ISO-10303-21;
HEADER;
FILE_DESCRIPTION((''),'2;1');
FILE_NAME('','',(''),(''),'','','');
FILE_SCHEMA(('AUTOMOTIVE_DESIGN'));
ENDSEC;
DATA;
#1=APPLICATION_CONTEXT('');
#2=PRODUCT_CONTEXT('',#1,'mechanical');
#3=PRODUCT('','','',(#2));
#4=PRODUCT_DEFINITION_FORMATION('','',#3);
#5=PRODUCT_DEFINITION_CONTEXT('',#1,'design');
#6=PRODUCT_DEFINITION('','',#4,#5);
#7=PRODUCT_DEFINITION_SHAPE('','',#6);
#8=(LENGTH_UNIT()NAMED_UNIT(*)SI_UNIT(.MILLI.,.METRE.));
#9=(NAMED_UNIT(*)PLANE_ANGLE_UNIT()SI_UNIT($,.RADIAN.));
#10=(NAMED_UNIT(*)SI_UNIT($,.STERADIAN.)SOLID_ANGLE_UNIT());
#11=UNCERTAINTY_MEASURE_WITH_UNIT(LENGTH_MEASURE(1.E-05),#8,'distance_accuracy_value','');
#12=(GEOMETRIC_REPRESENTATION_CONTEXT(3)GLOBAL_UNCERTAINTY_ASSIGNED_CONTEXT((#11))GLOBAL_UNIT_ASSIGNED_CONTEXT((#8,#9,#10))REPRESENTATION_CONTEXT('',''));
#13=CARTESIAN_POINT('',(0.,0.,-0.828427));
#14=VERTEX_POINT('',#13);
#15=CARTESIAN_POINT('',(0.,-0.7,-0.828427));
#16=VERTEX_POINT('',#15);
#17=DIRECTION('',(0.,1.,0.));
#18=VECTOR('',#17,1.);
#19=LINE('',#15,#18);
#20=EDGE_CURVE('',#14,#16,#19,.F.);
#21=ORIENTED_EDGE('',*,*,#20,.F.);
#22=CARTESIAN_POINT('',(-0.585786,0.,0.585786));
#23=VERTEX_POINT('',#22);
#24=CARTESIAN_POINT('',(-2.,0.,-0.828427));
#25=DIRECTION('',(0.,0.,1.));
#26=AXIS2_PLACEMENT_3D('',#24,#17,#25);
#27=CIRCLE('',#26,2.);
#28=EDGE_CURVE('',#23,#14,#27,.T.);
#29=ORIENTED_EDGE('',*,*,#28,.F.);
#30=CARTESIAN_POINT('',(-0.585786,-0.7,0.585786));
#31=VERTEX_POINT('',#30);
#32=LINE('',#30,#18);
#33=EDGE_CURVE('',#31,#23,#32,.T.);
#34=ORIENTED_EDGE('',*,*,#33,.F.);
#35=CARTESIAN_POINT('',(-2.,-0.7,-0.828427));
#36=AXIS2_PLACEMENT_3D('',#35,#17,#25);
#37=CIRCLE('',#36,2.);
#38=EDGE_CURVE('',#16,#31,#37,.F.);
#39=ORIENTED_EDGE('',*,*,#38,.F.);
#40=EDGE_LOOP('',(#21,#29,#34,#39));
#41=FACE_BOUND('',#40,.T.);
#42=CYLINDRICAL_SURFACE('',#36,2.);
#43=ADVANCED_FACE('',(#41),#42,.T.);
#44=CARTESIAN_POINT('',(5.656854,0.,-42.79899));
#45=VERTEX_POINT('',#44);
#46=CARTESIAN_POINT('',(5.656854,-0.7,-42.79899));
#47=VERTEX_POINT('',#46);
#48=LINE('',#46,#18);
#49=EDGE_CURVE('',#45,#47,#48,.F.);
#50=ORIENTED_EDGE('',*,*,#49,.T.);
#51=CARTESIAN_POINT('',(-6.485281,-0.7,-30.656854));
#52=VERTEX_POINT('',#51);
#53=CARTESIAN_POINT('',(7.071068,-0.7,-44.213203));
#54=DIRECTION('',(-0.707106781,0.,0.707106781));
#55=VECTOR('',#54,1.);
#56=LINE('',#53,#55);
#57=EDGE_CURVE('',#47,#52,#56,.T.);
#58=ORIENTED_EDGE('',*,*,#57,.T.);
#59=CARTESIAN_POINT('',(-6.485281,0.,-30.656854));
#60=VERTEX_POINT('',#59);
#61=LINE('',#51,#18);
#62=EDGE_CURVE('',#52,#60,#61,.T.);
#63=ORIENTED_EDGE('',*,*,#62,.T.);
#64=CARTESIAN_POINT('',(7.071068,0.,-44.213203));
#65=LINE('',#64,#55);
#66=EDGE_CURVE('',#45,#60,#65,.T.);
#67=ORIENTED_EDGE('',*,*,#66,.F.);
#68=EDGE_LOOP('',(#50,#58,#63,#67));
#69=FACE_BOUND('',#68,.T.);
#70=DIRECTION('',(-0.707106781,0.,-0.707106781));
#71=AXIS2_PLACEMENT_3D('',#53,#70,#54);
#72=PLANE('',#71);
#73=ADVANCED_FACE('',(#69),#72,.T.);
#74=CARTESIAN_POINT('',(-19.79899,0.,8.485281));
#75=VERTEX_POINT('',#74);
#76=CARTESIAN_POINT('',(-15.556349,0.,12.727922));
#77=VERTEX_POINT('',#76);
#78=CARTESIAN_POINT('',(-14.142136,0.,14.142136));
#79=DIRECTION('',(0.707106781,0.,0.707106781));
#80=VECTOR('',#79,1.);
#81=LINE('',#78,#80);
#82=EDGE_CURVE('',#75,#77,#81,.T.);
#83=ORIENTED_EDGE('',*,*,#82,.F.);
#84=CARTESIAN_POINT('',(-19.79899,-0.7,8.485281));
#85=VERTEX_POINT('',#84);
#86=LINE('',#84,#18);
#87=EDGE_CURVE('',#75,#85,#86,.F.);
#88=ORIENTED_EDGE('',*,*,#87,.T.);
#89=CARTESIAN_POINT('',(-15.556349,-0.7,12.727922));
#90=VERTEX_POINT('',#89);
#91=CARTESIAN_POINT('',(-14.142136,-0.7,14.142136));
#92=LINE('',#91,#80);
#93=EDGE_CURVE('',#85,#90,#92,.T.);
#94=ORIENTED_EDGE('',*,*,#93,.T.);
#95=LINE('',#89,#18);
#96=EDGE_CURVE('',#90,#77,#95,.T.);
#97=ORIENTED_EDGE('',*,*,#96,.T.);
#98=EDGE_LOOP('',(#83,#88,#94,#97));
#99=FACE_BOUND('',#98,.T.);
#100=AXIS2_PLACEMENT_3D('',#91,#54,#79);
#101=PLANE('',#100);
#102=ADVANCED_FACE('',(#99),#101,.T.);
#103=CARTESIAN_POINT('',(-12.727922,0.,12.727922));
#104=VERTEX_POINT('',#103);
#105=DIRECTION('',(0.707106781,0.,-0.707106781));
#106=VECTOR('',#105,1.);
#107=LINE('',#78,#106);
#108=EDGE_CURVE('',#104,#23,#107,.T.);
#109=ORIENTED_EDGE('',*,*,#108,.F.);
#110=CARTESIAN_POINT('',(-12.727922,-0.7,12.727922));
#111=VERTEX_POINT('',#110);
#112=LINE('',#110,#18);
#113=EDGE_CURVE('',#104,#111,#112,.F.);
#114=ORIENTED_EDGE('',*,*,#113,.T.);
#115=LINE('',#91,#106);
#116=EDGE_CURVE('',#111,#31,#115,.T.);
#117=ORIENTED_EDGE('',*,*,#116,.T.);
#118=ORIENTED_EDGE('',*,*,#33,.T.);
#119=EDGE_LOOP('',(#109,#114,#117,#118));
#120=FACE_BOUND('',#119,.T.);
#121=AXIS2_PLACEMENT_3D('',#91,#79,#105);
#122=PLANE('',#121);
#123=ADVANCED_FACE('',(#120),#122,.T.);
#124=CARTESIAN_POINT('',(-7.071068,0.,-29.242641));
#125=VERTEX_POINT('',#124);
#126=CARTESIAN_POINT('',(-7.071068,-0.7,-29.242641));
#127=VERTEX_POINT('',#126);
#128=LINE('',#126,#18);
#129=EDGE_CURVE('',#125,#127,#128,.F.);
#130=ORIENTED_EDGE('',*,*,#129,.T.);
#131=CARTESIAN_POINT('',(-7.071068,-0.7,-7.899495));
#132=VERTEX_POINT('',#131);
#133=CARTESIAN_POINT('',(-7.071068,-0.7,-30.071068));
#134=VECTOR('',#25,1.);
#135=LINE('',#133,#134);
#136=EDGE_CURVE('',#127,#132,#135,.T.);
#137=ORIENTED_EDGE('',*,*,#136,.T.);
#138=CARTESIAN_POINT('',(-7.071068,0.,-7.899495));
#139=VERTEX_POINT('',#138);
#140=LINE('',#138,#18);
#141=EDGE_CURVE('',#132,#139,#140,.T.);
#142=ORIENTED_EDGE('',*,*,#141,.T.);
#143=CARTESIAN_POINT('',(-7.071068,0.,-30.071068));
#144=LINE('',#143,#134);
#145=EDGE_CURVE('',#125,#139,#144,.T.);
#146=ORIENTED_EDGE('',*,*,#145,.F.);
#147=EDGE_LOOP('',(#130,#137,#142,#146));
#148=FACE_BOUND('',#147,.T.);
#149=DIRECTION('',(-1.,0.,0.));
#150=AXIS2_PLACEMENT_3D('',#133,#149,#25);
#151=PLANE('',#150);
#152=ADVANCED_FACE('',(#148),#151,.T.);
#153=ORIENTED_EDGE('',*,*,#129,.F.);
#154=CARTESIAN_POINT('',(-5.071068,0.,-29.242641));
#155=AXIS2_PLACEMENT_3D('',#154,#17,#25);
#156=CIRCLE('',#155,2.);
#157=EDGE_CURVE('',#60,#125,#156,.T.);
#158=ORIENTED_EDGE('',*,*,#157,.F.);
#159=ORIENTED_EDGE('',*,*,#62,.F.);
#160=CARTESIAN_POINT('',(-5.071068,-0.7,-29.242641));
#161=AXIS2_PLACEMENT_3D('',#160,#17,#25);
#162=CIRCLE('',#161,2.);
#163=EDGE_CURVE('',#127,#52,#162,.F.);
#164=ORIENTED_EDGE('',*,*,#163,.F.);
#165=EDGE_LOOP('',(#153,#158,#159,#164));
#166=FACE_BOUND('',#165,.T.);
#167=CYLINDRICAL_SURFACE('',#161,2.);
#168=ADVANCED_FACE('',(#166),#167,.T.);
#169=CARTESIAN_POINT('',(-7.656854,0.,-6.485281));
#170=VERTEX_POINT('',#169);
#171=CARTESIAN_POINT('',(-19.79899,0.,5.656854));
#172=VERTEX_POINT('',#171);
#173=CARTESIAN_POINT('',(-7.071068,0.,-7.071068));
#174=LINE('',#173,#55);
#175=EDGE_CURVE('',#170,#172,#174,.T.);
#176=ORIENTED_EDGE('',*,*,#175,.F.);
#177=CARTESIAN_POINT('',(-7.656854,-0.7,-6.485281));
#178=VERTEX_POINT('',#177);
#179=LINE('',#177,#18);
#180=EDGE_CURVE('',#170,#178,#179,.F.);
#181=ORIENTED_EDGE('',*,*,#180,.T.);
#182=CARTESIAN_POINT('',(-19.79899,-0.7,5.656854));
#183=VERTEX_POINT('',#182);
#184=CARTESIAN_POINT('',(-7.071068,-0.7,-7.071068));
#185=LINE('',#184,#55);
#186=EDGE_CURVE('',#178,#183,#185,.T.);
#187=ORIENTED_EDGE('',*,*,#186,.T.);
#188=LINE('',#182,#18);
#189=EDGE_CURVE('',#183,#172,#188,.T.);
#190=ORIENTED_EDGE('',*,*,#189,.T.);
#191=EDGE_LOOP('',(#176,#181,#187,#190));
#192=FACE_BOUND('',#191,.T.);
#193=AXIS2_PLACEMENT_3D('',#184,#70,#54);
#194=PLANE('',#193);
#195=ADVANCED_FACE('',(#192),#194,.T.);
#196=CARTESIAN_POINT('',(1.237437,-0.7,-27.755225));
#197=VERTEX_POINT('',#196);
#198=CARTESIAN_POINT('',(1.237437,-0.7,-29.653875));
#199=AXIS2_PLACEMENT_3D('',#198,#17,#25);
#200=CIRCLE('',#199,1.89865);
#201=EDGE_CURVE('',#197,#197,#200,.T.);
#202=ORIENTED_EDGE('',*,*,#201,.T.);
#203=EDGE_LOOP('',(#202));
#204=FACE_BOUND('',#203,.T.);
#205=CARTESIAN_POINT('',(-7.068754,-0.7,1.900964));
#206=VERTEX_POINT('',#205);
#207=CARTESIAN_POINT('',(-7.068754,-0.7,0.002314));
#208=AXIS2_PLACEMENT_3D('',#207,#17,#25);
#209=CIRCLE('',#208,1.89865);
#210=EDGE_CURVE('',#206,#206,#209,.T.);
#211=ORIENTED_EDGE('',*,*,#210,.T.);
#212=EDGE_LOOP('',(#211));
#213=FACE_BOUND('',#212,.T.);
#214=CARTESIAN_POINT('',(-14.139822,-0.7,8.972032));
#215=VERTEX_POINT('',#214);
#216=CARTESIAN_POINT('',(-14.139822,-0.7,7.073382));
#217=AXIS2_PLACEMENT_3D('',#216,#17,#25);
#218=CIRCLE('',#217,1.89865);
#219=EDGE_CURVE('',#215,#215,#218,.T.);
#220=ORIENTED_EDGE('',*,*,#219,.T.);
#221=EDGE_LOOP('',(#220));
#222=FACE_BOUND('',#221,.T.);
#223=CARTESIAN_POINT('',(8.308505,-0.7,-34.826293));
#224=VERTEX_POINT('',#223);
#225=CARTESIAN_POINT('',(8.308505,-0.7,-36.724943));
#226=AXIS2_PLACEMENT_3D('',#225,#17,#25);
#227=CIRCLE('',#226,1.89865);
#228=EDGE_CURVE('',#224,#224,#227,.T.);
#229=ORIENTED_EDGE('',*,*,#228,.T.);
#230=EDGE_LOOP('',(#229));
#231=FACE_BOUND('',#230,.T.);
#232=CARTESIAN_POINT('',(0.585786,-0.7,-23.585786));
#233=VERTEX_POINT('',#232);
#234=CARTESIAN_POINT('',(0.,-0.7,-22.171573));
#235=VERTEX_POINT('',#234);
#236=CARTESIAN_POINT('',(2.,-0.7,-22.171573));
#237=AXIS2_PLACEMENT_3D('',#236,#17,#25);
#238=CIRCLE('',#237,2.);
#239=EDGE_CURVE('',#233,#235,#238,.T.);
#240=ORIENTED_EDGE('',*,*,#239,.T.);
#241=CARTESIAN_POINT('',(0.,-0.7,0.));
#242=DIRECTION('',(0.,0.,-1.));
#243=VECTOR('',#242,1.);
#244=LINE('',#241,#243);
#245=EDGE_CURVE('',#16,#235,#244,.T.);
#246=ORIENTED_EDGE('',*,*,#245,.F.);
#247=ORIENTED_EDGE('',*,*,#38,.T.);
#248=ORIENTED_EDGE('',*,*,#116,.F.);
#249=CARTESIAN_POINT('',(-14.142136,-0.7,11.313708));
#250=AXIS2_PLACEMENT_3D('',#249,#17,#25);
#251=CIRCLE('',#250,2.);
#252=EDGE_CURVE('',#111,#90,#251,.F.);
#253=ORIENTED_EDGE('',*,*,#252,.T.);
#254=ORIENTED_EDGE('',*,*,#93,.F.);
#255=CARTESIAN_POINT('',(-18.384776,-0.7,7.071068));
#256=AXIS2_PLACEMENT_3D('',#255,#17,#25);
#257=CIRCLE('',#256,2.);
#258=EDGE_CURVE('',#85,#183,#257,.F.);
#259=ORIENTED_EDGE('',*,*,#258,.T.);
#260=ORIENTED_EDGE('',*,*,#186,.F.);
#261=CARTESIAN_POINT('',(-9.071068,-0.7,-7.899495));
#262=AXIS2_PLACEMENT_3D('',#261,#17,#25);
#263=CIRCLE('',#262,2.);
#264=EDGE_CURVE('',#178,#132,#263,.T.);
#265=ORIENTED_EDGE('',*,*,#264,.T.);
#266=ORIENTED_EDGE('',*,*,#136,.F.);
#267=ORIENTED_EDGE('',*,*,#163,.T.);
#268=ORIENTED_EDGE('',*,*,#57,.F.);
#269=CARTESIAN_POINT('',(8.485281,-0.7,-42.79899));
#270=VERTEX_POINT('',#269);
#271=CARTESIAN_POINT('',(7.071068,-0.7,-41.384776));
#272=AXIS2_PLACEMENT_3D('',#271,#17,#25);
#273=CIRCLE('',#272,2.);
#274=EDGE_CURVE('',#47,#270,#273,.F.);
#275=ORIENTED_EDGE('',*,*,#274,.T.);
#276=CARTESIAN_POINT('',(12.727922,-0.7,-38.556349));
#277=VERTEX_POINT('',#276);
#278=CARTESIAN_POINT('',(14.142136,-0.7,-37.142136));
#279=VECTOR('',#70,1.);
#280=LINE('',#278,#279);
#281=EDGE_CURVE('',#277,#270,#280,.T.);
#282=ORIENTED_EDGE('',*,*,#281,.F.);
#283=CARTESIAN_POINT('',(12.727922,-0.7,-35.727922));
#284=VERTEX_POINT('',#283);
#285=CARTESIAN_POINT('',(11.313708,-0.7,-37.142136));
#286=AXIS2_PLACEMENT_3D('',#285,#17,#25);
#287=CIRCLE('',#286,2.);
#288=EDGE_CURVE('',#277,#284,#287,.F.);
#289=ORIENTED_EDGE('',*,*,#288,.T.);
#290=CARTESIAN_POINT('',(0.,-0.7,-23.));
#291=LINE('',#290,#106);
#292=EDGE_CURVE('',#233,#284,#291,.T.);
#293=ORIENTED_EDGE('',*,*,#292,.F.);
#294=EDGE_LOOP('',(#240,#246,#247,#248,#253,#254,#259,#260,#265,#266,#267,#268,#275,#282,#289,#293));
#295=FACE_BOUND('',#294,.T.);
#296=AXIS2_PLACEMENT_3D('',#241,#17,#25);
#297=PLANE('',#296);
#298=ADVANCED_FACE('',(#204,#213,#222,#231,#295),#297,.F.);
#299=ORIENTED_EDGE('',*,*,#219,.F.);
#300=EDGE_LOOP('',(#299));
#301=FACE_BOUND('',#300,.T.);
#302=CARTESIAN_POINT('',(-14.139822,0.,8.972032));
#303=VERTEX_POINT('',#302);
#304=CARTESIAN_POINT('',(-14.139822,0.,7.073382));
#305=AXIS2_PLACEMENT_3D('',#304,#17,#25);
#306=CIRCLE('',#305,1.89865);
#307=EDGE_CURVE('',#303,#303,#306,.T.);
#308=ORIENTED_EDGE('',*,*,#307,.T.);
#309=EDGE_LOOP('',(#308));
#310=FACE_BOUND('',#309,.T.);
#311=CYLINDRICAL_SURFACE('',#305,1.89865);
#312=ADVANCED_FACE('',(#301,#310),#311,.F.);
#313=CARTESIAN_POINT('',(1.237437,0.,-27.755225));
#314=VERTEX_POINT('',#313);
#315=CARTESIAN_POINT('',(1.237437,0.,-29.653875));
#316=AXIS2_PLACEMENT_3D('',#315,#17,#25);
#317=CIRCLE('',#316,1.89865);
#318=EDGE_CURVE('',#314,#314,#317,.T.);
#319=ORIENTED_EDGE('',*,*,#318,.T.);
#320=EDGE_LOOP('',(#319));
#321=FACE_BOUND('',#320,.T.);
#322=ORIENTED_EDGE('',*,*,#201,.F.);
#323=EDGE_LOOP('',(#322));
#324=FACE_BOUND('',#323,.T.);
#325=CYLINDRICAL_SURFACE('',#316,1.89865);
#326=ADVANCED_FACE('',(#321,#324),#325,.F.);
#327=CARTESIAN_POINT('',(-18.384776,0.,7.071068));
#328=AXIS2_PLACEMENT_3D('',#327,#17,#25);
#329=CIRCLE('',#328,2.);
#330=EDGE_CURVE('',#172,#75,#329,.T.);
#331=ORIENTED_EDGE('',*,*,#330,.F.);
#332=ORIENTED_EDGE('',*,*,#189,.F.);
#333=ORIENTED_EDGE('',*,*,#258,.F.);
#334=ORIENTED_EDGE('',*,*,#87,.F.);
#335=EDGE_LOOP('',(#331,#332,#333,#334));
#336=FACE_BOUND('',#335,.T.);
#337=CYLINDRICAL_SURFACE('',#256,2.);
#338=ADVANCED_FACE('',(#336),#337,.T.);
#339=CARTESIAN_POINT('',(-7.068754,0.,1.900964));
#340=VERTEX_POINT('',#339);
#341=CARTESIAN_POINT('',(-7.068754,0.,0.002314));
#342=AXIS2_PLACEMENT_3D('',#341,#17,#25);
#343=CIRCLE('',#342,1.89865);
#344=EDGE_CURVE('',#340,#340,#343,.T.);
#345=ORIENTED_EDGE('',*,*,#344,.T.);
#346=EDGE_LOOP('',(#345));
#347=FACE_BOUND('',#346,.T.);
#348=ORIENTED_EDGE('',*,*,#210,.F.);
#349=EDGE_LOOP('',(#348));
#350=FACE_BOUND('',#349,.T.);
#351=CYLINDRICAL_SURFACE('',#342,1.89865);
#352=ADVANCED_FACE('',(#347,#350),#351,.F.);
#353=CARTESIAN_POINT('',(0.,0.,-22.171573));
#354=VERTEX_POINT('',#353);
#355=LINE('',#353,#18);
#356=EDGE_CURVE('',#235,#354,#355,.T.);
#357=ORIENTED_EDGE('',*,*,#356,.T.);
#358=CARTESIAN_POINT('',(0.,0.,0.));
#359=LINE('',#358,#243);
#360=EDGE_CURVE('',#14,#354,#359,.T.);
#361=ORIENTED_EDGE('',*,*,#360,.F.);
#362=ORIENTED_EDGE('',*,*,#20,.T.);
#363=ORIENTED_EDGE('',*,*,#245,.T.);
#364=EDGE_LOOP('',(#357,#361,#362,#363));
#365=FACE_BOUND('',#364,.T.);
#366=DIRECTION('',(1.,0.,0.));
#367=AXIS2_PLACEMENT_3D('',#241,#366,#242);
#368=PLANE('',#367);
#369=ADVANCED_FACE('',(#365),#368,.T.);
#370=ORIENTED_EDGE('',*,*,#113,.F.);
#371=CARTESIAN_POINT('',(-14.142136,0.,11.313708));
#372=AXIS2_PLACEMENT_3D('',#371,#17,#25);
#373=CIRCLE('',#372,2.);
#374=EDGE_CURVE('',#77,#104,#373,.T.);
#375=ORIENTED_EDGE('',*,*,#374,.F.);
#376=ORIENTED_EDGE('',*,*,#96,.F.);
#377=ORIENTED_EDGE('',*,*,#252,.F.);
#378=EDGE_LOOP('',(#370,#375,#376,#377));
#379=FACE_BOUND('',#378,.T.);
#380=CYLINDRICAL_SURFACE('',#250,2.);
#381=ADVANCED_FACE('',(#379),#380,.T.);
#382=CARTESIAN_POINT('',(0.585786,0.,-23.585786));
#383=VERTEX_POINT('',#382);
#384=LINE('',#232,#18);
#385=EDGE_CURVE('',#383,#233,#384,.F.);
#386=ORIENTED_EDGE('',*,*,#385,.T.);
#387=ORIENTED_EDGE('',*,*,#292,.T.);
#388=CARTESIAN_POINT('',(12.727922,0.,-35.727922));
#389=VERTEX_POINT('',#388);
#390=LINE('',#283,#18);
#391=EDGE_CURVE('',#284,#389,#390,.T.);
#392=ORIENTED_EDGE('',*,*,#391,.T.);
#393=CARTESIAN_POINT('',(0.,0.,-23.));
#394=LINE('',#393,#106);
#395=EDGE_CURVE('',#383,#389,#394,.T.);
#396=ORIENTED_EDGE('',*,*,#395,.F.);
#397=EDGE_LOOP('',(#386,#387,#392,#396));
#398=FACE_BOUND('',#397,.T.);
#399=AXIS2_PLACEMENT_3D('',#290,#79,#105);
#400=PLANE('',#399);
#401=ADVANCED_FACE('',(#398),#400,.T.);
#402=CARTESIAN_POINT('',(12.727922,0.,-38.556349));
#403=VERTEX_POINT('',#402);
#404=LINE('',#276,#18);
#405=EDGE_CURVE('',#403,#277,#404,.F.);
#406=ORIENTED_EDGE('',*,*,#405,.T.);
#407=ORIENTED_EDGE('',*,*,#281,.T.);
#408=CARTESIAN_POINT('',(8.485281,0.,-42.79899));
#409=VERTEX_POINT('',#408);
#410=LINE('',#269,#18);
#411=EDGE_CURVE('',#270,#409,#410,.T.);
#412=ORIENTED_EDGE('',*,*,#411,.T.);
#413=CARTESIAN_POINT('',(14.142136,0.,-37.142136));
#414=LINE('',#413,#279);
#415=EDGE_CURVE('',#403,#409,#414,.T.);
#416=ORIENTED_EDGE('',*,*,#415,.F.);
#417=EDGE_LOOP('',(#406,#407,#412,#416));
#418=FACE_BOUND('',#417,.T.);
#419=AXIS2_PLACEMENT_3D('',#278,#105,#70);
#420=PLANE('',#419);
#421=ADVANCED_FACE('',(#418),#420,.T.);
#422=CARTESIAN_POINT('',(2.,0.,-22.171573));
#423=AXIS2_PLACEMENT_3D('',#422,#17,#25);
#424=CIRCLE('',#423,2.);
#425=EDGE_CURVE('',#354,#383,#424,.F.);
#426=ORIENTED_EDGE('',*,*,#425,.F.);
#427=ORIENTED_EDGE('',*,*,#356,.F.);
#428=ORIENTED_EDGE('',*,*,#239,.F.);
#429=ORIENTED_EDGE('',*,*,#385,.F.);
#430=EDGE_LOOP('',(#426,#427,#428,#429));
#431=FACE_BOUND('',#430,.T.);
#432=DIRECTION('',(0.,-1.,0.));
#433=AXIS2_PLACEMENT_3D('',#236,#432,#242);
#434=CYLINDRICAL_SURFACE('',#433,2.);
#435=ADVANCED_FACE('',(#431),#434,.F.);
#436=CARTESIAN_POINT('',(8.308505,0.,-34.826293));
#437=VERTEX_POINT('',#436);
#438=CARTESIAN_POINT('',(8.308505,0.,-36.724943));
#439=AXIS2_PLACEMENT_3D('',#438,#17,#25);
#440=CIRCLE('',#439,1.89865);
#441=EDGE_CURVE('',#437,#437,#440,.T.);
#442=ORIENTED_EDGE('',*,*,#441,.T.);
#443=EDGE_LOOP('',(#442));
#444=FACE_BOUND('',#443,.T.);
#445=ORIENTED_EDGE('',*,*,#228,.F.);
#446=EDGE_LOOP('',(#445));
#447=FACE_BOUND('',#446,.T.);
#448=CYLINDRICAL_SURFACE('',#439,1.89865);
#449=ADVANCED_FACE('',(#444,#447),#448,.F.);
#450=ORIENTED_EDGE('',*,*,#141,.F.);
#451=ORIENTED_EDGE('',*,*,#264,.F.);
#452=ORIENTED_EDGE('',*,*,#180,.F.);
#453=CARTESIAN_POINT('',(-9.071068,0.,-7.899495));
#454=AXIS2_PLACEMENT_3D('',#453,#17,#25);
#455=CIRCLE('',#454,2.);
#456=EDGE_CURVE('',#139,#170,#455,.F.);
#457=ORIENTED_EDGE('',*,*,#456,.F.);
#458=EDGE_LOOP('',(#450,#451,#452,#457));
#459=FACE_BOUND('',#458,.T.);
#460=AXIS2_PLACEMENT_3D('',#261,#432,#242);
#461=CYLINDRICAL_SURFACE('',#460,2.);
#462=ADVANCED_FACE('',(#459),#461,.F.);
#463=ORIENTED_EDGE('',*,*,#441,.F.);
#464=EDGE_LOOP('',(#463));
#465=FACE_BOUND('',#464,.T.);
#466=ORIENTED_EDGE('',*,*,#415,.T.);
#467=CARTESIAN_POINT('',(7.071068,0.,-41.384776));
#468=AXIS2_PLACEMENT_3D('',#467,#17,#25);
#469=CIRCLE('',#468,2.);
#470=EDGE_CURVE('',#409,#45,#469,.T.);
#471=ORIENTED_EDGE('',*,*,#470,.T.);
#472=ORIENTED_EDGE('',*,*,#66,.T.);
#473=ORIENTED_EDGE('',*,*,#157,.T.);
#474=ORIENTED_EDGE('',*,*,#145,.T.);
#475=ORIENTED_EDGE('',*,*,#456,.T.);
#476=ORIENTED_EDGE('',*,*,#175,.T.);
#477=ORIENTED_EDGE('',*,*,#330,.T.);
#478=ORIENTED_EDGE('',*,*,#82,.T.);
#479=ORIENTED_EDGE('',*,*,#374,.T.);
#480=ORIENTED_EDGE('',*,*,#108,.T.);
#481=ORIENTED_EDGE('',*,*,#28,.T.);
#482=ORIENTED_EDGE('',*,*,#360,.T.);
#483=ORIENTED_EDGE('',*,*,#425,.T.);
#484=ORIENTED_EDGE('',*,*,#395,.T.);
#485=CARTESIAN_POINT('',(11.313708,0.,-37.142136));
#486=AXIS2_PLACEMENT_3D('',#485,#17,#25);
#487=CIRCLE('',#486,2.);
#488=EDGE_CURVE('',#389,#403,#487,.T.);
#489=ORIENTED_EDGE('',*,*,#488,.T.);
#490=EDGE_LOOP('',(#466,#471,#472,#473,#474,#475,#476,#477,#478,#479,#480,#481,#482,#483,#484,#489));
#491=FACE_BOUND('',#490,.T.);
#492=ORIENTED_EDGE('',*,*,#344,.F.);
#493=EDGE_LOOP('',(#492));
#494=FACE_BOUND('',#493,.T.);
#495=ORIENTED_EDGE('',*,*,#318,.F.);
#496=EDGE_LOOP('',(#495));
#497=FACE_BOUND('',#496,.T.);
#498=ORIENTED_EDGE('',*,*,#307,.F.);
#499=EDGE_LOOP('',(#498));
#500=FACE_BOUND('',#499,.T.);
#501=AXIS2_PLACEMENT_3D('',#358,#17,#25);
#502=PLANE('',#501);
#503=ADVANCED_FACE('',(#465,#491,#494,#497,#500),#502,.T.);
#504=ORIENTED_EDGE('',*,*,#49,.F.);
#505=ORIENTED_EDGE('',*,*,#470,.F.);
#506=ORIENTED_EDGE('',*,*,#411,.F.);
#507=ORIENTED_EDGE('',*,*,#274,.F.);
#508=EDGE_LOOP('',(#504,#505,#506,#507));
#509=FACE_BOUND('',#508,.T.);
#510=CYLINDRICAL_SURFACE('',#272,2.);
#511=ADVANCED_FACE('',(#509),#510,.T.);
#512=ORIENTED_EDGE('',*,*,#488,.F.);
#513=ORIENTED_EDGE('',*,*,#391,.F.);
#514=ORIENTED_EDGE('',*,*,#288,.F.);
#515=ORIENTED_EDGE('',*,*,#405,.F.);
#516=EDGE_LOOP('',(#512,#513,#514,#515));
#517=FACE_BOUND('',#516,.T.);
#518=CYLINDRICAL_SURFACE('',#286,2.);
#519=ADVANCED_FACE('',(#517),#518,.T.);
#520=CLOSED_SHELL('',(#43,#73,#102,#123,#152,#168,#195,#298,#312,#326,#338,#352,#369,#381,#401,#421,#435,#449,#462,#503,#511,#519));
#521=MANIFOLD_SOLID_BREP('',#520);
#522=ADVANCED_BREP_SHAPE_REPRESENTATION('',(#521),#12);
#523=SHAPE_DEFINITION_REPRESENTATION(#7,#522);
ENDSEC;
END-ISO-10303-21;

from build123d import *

# Parameters (mm, degrees)
BASE_FLANGE2_DEPTH    = 0.7
F_6_CLEARANCE_HOLE1_D = 3.7973
FILLET1_R             = 2


# Sheet-metal steps are written as plain solids
with BuildPart() as part:
    # Sketch1 → Base-Flange2 (new body)
    with BuildSketch(Plane(origin=(0, 0, 0), x_dir=(1, 0, 0), z_dir=(0, 1, 0))):
        Polygon((0, 0), (0, 23), (14.142135624, 37.142135624), (7.071067812, 44.213203436), (-7.071067812, 30.071067812), (-7.071067812, 7.071067812), (-21.213203436, -7.071067812), (-14.142135624, -14.142135624), align=None)
    extrude(amount=-BASE_FLANGE2_DEPTH)

    # #6 Clearance Hole1 (through all)
    with Locations(Plane(origin=(0, 0, 0), x_dir=(1, 0, 0), z_dir=(0, 1, 0))):
        with Locations((-14.139821541, -7.073381895), (-7.068753729, -0.002314083), (1.237436867, 29.653874811), (8.308504679, 36.724942623)):
            Hole(F_6_CLEARANCE_HOLE1_D / 2)

    # Fillet1
    fillet1_edges = [part.edges().sort_by_distance(p)[0] for p in [
        (-14.142135624, -0.35, 14.142135624),
        (-21.213203436, -0.35, 7.071067812),
        (-7.071067812, -0.35, -7.071067812),
        (-7.071067812, -0.35, -30.071067812),
        (7.071067812, -0.35, -44.213203436),
        (14.142135624, -0.35, -37.142135624),
        (0, -0.35, -23),
        (0, -0.35, 0),
    ]]
    fillet(fillet1_edges, radius=FILLET1_R)


solid = part.part
